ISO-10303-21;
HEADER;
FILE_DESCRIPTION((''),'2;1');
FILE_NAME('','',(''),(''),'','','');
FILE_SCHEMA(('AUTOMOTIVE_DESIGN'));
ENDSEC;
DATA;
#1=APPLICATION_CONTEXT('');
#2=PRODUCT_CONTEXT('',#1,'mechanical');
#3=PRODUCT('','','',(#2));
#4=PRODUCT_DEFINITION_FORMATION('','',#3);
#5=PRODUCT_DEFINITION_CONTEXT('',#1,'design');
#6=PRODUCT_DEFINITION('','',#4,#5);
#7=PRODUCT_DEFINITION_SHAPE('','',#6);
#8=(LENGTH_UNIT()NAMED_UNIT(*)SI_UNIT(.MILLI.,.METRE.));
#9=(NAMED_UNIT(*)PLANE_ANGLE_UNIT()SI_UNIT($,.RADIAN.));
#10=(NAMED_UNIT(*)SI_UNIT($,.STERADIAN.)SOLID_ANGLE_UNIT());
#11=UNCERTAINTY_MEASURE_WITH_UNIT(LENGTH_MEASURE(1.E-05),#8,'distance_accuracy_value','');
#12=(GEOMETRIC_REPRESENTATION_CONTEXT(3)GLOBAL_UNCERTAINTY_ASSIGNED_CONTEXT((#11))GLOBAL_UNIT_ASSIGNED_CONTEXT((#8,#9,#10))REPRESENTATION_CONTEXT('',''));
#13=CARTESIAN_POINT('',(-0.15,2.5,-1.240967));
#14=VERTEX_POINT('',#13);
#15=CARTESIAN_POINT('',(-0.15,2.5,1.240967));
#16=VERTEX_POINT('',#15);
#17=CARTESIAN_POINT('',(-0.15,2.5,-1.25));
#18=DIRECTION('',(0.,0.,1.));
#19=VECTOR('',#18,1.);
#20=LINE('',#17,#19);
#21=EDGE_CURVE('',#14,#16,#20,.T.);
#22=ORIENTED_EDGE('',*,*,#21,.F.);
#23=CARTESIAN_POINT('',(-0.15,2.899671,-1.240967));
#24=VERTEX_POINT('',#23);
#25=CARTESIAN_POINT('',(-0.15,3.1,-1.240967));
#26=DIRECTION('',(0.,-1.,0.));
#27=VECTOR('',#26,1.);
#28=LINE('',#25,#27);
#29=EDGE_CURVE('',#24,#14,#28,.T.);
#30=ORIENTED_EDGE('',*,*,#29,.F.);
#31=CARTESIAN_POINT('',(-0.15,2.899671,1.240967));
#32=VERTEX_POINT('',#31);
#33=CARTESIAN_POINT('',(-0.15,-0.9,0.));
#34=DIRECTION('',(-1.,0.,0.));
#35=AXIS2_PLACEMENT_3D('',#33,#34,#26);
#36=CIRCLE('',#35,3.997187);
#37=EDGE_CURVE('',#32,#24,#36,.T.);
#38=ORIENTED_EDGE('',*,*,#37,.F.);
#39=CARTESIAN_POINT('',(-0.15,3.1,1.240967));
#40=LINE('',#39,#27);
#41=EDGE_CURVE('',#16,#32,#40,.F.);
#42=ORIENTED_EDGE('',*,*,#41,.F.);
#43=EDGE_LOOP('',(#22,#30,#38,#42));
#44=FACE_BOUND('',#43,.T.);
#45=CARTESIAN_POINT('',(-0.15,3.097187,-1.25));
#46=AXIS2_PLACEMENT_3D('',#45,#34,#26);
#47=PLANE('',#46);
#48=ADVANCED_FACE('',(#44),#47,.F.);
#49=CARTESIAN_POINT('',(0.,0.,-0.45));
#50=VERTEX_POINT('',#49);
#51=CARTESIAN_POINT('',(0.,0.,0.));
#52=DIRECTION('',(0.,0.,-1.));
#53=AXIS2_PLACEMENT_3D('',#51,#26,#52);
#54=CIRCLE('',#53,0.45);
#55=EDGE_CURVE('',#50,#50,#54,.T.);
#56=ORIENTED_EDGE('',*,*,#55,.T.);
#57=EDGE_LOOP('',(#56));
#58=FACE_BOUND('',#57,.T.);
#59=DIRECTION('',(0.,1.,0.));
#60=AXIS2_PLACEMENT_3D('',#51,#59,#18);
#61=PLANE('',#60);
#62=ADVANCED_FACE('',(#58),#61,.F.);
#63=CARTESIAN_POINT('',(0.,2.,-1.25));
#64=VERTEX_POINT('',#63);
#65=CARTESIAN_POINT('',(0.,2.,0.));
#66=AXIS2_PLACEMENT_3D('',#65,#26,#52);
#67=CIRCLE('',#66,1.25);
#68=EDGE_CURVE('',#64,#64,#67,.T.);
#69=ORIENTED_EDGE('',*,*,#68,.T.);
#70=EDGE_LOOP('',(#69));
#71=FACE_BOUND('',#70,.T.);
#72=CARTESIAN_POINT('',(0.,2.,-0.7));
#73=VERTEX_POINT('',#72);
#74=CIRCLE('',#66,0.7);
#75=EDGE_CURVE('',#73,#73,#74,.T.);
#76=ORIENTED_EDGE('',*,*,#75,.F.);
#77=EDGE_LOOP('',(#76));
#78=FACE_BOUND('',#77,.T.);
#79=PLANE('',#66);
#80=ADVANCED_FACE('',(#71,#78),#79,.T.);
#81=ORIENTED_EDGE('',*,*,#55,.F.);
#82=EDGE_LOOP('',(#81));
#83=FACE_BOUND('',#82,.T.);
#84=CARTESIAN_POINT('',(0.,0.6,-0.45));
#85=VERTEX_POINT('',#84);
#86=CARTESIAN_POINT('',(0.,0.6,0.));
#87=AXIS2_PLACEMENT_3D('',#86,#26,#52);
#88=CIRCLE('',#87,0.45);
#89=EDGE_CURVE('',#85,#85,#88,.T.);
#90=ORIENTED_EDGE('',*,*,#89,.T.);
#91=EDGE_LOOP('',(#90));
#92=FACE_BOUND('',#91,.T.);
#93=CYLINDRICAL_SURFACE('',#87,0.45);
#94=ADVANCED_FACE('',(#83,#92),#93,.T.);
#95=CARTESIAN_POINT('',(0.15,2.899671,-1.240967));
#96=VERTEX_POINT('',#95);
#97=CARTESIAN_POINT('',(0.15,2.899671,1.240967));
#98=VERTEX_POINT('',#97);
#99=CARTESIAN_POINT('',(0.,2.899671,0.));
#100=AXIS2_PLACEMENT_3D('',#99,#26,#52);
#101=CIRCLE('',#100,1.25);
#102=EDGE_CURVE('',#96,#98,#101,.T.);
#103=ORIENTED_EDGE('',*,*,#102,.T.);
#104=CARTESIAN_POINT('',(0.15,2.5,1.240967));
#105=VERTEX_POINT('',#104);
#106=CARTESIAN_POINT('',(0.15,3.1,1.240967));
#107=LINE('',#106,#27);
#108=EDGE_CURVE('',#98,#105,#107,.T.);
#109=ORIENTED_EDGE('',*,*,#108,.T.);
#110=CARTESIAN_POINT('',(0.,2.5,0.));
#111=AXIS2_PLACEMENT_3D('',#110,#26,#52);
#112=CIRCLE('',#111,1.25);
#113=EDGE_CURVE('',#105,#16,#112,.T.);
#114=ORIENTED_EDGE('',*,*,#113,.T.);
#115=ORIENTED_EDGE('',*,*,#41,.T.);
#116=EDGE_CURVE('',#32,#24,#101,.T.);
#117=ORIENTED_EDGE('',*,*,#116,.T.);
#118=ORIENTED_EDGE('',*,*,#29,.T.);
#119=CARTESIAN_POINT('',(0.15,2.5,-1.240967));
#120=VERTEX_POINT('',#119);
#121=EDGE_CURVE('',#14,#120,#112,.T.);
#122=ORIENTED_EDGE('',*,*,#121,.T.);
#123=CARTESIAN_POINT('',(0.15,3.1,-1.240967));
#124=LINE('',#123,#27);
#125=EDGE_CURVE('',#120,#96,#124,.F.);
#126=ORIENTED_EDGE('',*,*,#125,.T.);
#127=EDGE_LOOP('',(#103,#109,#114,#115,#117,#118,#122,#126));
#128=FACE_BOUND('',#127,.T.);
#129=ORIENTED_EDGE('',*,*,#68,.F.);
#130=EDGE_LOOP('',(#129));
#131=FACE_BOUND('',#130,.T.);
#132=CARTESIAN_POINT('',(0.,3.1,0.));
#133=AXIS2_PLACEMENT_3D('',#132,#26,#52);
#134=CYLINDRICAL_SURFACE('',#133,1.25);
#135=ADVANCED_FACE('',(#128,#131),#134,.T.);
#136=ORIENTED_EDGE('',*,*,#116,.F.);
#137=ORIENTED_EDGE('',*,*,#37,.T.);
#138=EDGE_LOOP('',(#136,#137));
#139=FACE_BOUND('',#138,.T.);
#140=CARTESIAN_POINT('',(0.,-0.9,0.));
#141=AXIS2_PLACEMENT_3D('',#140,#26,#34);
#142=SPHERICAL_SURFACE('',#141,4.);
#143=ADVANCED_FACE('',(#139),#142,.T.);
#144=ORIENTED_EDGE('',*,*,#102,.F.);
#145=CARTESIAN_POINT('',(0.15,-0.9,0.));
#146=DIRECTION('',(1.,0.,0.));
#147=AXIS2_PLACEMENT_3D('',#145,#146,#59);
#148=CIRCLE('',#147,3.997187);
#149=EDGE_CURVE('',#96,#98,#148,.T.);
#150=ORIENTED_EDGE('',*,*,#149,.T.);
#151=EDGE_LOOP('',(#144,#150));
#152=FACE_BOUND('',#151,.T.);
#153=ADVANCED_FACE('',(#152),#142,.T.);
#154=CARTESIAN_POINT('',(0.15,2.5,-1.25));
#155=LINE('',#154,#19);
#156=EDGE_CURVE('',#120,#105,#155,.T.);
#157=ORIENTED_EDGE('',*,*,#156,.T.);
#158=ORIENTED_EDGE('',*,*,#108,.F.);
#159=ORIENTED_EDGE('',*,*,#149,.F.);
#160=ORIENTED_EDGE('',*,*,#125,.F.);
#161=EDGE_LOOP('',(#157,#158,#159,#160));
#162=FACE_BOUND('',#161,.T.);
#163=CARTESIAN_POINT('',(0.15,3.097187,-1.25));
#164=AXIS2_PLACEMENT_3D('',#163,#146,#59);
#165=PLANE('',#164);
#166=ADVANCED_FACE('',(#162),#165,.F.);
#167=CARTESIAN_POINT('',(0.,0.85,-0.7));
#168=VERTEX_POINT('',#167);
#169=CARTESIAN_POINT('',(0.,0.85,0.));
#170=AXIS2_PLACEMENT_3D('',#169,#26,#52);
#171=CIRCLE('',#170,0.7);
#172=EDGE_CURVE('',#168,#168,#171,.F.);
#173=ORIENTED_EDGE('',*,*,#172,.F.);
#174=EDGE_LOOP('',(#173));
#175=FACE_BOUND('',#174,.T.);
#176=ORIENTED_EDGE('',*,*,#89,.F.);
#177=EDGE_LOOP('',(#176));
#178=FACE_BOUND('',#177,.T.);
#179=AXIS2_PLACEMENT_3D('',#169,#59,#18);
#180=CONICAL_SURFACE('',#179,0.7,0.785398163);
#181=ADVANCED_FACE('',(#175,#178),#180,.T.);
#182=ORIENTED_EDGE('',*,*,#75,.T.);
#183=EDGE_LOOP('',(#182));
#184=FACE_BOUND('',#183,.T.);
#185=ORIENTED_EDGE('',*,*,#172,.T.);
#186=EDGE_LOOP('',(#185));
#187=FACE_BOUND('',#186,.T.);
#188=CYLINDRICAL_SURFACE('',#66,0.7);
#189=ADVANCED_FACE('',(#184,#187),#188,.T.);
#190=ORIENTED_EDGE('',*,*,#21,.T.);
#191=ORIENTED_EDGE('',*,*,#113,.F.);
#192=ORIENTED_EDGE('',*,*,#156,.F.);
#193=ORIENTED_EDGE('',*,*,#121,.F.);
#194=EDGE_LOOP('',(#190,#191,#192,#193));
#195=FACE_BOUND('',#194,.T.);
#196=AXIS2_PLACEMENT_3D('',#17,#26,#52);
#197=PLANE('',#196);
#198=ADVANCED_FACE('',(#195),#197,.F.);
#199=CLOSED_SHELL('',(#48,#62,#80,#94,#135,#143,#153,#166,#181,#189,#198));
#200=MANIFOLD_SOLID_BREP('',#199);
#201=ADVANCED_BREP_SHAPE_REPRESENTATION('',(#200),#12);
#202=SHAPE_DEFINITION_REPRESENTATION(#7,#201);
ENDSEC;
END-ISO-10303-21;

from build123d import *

# Parameters (mm, degrees)
SKETCH1_R               = 1.25
BOSS_EXTRUDE1_DEPTH     = 3.1
SKETCH3_OUTSIDE_W       = 5.44
SKETCH3_OUTSIDE_H       = 5.44
SKETCH3_OUTSIDE_R       = 0.7
CUT_EXTRUDE1_DEPTH      = 2
SKETCH4_OUTSIDE_W       = 5.44
SKETCH4_OUTSIDE_H       = 5.44
SKETCH4_OUTSIDE_R       = 0.45
CUT_EXTRUDE2_DEPTH      = 0.6
CHAMFER1_SIZE           = 0.25
CUT_EXTRUDE3_DEPTH      = 4.568613176
CUT_EXTRUDE3_DEPTH_BACK = 4.568613176


with BuildPart() as part:
    # Sketch1 → Boss-Extrude1 (new body)
    with BuildSketch(Plane(origin=(0, 0, 0), x_dir=(1, 0, 0), z_dir=(0, 1, 0))):
        with Locations(Location((0, 0, 0), (0, 0, 90))):
            Circle(SKETCH1_R)
    extrude(amount=BOSS_EXTRUDE1_DEPTH)

    # Sketch2 → Cut-Revolve1 (revolve, cut)
    with BuildSketch(Plane.XY, mode=Mode.PRIVATE) as cut_revolve1_sk:
        with BuildLine():
            Line((1.25, 2.899671038), (1.25, 3.3))
            Line((1.25, 3.3), (0, 3.3))
            Line((0, 3.3), (0, 3.1))
            ThreePointArc((0, 3.1), (0.632975452, 3.049600243), (1.25, 2.899671038))
        make_face()
    revolve(cut_revolve1_sk.sketch.rotate(Axis((0, 0, 0), (0, 1, 0)), 90), axis=Axis((0, 0, 0), (0, 1, 0)), mode=Mode.SUBTRACT)

    # Sketch3 outside → Cut-Extrude1 (cut)
    with BuildSketch(Plane.XZ):
        Rectangle(SKETCH3_OUTSIDE_W, SKETCH3_OUTSIDE_H)
        with Locations(Location((0, 0, 0), (0, 0, 270))):
            Circle(SKETCH3_OUTSIDE_R, mode=Mode.SUBTRACT)
    extrude(amount=-CUT_EXTRUDE1_DEPTH, mode=Mode.SUBTRACT)

    # Sketch4 outside → Cut-Extrude2 (cut)
    with BuildSketch(Plane.XZ):
        Rectangle(SKETCH4_OUTSIDE_W, SKETCH4_OUTSIDE_H)
        with Locations(Location((0, 0, 0), (0, 0, 270))):
            Circle(SKETCH4_OUTSIDE_R, mode=Mode.SUBTRACT)
    extrude(amount=-CUT_EXTRUDE2_DEPTH, mode=Mode.SUBTRACT)

    # Chamfer1
    chamfer1_edges = [part.edges().sort_by_distance(p)[0] for p in [
        (0, 0.6, 0.7),
    ]]
    chamfer(chamfer1_edges, length=CHAMFER1_SIZE - 0.0001)  # a hair under: the kernel refuses the full size

    # Sketch5 → Cut-Extrude3 (cut, two sides: drawn at the far end of the back side and taken through both)
    with BuildSketch(Plane.XY.offset(-CUT_EXTRUDE3_DEPTH_BACK)):
        with BuildLine():
            Line((-0.15, 3.097186511), (-0.15, 2.5))
            Line((-0.15, 2.5), (0.15, 2.5))
            Line((0.15, 2.5), (0.15, 3.097186511))
            ThreePointArc((0.15, 3.097186511), (0, 3.1), (-0.15, 3.097186511))
        make_face()
    extrude(amount=CUT_EXTRUDE3_DEPTH + CUT_EXTRUDE3_DEPTH_BACK, mode=Mode.SUBTRACT)


solid = part.part
